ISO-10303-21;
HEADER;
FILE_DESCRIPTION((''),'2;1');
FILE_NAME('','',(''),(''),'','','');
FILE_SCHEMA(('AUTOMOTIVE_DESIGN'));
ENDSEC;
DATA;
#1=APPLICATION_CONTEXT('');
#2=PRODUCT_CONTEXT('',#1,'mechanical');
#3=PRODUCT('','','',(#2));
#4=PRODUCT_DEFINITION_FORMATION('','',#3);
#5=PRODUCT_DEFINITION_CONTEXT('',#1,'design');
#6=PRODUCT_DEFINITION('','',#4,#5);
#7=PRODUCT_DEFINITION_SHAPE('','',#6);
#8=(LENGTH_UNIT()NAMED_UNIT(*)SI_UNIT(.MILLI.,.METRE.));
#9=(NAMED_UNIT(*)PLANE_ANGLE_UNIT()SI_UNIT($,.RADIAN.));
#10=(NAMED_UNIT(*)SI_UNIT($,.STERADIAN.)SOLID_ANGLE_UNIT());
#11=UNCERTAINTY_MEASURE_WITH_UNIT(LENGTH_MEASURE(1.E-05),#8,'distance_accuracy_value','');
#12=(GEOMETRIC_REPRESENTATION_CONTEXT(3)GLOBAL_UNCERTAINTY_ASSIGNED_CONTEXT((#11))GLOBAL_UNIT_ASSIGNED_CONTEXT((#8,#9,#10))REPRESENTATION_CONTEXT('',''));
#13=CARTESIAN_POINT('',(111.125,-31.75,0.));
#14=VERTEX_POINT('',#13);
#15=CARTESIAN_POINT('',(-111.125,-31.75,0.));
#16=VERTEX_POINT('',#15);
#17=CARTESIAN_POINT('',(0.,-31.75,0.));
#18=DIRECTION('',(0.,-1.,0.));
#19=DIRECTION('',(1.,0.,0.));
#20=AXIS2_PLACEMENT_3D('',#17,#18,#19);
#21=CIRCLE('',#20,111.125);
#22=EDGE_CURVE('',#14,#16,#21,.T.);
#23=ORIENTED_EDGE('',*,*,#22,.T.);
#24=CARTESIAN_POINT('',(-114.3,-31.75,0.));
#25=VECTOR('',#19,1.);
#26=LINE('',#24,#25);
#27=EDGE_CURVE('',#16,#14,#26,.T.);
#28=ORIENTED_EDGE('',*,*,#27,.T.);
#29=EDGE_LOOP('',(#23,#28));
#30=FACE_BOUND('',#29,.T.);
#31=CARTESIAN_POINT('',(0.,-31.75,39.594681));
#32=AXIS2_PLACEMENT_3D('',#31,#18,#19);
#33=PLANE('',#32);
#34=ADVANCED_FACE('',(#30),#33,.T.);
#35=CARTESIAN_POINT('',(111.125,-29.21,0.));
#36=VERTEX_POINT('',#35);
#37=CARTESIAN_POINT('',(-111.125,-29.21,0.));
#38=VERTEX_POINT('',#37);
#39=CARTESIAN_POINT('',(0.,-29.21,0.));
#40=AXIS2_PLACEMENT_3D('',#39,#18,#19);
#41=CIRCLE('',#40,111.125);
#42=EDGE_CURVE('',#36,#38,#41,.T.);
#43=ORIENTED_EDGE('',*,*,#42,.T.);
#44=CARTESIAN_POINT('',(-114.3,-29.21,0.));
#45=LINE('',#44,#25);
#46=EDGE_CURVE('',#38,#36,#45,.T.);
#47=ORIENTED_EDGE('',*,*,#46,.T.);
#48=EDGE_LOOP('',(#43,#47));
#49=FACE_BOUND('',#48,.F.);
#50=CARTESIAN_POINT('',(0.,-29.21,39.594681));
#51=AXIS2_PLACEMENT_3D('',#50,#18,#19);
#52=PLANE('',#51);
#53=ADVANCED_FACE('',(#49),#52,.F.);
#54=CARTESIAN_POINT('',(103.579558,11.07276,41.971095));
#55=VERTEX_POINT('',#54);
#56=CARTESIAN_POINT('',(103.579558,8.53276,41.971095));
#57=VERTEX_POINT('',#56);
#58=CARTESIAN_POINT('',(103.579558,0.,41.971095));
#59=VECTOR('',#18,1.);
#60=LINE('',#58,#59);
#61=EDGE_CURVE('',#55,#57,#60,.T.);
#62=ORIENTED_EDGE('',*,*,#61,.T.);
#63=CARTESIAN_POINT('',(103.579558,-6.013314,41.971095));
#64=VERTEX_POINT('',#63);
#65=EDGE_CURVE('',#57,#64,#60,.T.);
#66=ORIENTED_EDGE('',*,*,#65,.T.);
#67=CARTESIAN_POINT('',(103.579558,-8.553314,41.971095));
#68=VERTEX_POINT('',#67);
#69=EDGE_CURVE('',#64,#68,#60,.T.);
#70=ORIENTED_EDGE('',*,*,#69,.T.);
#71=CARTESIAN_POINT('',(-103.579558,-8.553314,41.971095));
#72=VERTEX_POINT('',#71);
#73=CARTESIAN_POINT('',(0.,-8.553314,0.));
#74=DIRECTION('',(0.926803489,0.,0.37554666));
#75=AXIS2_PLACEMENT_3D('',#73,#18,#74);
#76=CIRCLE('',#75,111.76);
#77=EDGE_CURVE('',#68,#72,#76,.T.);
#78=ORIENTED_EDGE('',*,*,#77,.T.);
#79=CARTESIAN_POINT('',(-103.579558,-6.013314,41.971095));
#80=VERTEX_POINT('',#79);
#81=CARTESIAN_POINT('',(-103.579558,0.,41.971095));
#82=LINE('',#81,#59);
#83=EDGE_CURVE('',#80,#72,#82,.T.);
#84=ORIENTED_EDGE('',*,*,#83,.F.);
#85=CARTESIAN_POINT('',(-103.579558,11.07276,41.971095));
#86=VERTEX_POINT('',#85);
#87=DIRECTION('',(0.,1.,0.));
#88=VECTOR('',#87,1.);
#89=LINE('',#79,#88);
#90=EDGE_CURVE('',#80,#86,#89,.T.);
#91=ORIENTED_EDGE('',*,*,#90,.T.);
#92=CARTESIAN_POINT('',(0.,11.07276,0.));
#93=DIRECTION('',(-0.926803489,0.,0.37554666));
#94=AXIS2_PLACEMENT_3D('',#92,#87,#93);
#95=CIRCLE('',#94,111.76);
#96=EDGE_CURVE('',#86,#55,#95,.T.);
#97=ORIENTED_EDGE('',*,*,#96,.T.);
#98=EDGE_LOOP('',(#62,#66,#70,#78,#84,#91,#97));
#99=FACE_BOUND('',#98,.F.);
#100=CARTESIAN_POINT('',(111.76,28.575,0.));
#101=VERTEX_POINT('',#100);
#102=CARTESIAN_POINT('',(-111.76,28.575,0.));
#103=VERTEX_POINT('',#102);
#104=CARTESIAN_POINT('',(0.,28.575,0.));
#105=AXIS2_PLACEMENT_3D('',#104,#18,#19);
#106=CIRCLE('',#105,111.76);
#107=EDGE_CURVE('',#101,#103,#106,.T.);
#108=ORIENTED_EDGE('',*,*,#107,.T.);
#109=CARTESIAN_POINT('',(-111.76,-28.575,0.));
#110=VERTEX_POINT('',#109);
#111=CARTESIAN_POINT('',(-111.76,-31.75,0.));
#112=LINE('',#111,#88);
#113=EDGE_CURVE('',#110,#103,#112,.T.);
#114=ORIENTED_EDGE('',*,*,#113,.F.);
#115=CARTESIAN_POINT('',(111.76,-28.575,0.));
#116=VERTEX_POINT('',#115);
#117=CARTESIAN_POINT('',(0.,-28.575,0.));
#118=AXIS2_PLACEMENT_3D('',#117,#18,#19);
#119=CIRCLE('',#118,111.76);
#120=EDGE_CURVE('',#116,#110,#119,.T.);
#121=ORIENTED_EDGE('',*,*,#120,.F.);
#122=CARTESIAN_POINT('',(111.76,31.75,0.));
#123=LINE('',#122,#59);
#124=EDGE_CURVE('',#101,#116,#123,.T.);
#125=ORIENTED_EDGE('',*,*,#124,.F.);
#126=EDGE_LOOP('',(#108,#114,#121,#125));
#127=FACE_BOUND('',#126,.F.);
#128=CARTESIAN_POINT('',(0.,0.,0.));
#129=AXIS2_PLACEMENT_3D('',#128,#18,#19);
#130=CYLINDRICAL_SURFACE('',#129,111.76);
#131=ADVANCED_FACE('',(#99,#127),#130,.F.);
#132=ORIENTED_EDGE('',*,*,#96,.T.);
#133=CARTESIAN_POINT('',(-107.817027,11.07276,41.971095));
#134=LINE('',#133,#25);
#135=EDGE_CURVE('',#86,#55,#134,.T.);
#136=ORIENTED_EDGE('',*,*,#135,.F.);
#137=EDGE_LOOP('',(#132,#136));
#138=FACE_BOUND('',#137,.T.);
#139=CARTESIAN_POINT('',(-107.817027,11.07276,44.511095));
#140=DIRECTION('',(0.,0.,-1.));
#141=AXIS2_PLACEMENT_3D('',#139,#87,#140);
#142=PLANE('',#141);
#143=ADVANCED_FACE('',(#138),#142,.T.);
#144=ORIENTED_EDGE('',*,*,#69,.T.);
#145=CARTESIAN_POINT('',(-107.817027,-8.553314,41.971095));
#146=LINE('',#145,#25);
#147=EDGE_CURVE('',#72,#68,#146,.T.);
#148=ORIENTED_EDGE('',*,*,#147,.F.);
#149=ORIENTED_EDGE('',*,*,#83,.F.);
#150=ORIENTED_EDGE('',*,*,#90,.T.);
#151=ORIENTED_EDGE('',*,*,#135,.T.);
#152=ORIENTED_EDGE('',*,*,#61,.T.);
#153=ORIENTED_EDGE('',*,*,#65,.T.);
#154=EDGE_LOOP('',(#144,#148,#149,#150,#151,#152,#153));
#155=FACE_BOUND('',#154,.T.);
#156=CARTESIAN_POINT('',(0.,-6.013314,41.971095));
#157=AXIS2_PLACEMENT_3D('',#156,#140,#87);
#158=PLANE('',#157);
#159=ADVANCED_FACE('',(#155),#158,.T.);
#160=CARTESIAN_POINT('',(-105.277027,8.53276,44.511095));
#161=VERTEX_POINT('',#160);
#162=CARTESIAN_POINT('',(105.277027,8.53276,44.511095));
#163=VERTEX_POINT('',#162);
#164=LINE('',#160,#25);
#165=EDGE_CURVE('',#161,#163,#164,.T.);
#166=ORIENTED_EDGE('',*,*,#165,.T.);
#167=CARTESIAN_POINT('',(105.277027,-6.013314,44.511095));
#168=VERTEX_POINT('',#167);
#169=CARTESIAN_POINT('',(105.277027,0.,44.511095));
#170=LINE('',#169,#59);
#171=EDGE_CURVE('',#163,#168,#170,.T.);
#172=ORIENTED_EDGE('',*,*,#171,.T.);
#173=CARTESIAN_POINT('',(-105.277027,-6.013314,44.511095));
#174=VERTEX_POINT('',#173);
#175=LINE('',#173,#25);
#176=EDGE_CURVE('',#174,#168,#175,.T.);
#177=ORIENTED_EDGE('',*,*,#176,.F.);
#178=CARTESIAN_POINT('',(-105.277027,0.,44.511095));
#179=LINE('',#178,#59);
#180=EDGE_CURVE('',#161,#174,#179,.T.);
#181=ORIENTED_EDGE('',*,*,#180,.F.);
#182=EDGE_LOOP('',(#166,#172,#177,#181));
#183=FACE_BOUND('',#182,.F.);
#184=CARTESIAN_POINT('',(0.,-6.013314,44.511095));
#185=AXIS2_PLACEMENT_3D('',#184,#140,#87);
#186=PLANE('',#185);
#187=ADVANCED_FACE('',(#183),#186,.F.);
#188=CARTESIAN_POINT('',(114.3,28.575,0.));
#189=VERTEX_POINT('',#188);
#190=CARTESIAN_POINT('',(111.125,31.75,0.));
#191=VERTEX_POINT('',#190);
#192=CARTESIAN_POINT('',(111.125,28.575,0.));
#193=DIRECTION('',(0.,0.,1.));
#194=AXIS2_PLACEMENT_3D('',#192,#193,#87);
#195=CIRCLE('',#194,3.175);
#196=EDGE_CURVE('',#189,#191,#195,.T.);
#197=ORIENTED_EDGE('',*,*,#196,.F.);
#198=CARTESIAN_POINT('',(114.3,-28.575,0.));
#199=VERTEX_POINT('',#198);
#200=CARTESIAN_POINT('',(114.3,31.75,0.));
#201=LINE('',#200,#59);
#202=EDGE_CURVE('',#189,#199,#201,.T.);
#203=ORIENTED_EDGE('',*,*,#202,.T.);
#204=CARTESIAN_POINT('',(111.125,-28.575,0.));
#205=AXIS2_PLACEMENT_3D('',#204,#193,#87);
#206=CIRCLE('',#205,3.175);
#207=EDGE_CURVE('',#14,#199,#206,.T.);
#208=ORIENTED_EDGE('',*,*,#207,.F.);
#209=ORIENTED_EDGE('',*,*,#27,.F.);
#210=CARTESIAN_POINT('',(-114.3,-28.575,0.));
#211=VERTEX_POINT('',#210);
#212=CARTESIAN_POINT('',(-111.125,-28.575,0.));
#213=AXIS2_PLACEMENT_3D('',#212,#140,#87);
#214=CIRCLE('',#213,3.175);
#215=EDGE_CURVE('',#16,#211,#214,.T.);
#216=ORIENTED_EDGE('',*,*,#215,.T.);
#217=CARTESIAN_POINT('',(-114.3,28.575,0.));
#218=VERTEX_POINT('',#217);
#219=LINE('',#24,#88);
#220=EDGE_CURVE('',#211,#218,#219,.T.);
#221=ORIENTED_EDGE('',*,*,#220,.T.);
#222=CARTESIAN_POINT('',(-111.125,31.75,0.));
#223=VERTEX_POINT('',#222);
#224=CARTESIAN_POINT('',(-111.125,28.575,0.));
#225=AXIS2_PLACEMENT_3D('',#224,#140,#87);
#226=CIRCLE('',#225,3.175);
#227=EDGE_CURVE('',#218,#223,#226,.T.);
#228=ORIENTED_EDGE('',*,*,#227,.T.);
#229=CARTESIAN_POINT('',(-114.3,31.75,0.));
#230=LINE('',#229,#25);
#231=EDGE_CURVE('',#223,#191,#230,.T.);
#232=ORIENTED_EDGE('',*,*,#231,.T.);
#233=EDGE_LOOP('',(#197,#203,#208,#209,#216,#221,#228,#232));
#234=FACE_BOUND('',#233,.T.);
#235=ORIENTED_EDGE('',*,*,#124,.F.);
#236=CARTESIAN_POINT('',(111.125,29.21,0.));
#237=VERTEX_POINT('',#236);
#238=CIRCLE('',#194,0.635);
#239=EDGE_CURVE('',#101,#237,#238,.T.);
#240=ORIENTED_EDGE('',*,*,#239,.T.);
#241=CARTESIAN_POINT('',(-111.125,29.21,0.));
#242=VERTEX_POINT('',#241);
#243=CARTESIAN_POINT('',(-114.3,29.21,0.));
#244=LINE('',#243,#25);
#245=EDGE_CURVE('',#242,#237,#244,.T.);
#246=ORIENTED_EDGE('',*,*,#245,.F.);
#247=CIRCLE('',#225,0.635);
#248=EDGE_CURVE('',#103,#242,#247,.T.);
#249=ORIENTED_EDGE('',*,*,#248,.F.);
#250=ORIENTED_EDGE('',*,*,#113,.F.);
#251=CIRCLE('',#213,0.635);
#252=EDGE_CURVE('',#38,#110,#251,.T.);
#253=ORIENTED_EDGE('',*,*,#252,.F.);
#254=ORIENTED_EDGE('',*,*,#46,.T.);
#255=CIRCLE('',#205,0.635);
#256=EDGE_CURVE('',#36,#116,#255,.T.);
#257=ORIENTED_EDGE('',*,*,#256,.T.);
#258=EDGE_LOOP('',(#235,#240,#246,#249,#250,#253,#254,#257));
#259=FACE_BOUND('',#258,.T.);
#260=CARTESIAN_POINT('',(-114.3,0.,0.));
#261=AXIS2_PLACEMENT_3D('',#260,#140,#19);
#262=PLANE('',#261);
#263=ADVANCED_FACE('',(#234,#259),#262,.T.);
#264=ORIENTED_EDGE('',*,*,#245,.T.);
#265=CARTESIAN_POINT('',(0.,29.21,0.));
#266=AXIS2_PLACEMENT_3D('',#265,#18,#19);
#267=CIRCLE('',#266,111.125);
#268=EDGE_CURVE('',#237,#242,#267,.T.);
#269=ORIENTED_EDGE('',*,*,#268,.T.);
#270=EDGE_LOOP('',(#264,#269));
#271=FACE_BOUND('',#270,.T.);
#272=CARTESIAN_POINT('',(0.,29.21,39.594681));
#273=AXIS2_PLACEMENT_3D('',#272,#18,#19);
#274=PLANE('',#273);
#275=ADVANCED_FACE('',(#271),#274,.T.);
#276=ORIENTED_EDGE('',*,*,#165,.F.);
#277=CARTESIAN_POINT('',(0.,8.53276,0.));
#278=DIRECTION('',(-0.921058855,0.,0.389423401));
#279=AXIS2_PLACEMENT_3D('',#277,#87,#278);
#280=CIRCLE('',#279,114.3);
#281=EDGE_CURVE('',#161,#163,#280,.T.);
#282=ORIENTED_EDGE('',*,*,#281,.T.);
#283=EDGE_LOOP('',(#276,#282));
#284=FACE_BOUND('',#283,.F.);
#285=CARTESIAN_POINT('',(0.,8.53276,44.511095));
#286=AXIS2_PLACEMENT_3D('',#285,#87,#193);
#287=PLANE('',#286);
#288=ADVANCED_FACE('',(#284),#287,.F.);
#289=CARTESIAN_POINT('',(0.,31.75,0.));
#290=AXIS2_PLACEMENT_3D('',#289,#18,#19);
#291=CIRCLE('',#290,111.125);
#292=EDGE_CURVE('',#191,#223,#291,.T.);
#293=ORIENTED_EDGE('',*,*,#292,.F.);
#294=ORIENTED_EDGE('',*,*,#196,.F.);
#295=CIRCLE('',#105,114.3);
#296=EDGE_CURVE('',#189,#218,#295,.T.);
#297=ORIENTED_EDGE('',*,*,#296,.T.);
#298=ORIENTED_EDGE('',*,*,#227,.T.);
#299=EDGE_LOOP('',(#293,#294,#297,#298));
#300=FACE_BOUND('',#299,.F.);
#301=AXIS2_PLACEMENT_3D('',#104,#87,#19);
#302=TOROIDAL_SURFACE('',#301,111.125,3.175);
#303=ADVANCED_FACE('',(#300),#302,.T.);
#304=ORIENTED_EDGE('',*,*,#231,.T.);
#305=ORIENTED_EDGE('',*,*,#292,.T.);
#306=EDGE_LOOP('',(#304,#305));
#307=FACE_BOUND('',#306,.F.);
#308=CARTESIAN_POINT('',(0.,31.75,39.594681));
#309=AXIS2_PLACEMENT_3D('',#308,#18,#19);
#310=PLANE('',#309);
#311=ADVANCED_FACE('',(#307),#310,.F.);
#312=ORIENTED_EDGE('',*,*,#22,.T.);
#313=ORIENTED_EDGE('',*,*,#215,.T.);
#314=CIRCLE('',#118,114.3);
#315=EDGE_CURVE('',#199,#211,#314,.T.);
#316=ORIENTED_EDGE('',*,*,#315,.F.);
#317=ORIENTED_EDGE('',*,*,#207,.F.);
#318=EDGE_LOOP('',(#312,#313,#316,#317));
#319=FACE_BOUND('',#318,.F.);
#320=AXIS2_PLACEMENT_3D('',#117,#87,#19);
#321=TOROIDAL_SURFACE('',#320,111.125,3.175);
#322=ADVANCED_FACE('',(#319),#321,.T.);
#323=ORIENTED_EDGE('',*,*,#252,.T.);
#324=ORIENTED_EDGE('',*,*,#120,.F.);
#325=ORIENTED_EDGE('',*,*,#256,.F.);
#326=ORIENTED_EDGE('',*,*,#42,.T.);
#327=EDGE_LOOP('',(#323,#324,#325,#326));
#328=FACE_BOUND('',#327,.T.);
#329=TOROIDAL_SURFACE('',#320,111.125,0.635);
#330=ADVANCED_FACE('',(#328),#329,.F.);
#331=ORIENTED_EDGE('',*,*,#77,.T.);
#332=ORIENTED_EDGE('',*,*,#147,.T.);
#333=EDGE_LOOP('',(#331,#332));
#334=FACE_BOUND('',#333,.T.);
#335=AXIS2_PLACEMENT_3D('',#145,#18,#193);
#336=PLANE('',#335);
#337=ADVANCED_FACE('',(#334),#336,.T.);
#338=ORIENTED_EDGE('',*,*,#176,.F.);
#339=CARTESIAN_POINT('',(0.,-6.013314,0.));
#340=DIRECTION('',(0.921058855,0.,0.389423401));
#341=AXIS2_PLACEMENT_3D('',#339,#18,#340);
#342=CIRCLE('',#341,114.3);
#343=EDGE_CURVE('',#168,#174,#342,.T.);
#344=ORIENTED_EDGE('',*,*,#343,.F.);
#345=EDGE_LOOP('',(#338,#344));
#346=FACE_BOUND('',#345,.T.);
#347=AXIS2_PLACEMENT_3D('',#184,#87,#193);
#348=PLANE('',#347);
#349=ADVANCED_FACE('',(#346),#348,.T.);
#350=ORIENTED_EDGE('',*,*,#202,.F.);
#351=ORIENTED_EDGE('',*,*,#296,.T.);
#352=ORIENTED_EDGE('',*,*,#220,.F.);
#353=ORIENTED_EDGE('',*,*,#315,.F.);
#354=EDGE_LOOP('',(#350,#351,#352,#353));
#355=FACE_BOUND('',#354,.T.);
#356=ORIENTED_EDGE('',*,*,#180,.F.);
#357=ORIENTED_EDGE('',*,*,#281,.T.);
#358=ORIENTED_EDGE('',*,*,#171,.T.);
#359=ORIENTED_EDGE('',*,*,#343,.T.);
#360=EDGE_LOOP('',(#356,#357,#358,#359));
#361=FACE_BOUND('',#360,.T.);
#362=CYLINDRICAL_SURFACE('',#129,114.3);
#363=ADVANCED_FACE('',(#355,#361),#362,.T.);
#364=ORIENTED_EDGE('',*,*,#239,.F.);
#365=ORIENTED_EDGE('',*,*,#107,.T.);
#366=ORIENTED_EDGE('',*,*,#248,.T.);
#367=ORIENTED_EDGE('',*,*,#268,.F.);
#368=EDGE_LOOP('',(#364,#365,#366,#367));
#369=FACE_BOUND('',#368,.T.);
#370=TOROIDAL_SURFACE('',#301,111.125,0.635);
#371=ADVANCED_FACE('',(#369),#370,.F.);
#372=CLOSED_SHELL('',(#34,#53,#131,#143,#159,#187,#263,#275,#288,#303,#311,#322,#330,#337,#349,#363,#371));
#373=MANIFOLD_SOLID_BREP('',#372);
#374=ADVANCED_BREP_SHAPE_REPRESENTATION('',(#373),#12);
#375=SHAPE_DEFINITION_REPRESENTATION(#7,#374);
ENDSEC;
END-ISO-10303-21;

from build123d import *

# Parameters (mm, degrees)
F1_DEPTH      = 31.75
F2_W          = 14.5460739732
F2_H          = 83.8538557291
F3_DEPTH      = 114.301
F3_DEPTH_BACK = 114.301
F4_R          = 3.175
F5_T          = 2.54
F5_T3_DEPTH   = 215.6340543381


# Not quite as in the source:
# - a shell that OpenCascade refuses in one call is made with other operations: the cavity is built on its own and cut out


with BuildPart() as f1:
    # F0 (on Front) → F1 (new body, symmetric)
    with BuildSketch(Plane.XZ):
        with BuildLine():
            Line((-114.3, 0), (114.3, 0))
            ThreePointArc((114.3, 0), (0, 114.3), (-114.3, 0))
        make_face()
    extrude(amount=F1_DEPTH, both=True)

    # F2 (on Right) → F3 (cut, two sides)
    with BuildSketch(Plane.YZ) as f3_sk:
        with Locations((1.2597227469, 86.4380225539)):
            Rectangle(F2_W, F2_H)
    extrude(amount=-F3_DEPTH, mode=Mode.SUBTRACT)
    extrude(f3_sk.sketch, amount=F3_DEPTH_BACK, mode=Mode.SUBTRACT)

    # F4
    f4_edges = [f1.edges().sort_by_distance(p)[0] for p in [
        (0, 31.75, 114.3),
        (0, -31.75, 114.3),
    ]]
    fillet(f4_edges, radius=F4_R)

    # F5: shell of thickness 2.54, made by hand


with BuildPart() as f5_core1:
    # F5_t2: copy of F1
    add(f1.part)

    # the walls: a layer under each face that stays
    f5_faces = [f5_core1.faces().sort_by_distance(p)[0] for p in [
        (0, 31.75, 55.5625),
        (0, 30.8200640303, 113.3700640303),
        (98.9867036526, 19.05, 57.15),
        (0, -30.8200640303, 113.3700640303),
        (0, -31.75, 55.5625),
        (0, 8.5327597335, 79.4055473447),
        (0, 1.2597227469, 44.5110946894),
        (0, -6.0133142397, 79.4055473447),
    ]]
    thicken(f5_faces, amount=-F5_T, mode=Mode.SUBTRACT)

    # F5_s4 → F5_t3 (cut)
    with BuildSketch(Plane.YZ.offset(-107.8170271691)):
        Polygon((8.5073597335, 44.5364946894), (11.0727597335, 44.5110946894), (11.0727597335, 41.9710946894), (8.5327597335, 41.9710946894), align=None)
        Polygon((-5.9879142397, 44.5364946894), (-6.0133142397, 41.9710946894), (-8.5533142397, 41.9710946894), (-8.5533142397, 44.5110946894), align=None)
    extrude(amount=F5_T3_DEPTH, mode=Mode.SUBTRACT)


with BuildPart() as f1_1:
    add(f1.part)

    # what is left inside the walls is the cavity
    f5_cavity = [f5_core1.part.solids().sort_by_distance(p)[0] for p in [
        (0, 29.1846, 37.041667),
    ]]
    add(f5_cavity, mode=Mode.SUBTRACT)


solid = f1_1.part
